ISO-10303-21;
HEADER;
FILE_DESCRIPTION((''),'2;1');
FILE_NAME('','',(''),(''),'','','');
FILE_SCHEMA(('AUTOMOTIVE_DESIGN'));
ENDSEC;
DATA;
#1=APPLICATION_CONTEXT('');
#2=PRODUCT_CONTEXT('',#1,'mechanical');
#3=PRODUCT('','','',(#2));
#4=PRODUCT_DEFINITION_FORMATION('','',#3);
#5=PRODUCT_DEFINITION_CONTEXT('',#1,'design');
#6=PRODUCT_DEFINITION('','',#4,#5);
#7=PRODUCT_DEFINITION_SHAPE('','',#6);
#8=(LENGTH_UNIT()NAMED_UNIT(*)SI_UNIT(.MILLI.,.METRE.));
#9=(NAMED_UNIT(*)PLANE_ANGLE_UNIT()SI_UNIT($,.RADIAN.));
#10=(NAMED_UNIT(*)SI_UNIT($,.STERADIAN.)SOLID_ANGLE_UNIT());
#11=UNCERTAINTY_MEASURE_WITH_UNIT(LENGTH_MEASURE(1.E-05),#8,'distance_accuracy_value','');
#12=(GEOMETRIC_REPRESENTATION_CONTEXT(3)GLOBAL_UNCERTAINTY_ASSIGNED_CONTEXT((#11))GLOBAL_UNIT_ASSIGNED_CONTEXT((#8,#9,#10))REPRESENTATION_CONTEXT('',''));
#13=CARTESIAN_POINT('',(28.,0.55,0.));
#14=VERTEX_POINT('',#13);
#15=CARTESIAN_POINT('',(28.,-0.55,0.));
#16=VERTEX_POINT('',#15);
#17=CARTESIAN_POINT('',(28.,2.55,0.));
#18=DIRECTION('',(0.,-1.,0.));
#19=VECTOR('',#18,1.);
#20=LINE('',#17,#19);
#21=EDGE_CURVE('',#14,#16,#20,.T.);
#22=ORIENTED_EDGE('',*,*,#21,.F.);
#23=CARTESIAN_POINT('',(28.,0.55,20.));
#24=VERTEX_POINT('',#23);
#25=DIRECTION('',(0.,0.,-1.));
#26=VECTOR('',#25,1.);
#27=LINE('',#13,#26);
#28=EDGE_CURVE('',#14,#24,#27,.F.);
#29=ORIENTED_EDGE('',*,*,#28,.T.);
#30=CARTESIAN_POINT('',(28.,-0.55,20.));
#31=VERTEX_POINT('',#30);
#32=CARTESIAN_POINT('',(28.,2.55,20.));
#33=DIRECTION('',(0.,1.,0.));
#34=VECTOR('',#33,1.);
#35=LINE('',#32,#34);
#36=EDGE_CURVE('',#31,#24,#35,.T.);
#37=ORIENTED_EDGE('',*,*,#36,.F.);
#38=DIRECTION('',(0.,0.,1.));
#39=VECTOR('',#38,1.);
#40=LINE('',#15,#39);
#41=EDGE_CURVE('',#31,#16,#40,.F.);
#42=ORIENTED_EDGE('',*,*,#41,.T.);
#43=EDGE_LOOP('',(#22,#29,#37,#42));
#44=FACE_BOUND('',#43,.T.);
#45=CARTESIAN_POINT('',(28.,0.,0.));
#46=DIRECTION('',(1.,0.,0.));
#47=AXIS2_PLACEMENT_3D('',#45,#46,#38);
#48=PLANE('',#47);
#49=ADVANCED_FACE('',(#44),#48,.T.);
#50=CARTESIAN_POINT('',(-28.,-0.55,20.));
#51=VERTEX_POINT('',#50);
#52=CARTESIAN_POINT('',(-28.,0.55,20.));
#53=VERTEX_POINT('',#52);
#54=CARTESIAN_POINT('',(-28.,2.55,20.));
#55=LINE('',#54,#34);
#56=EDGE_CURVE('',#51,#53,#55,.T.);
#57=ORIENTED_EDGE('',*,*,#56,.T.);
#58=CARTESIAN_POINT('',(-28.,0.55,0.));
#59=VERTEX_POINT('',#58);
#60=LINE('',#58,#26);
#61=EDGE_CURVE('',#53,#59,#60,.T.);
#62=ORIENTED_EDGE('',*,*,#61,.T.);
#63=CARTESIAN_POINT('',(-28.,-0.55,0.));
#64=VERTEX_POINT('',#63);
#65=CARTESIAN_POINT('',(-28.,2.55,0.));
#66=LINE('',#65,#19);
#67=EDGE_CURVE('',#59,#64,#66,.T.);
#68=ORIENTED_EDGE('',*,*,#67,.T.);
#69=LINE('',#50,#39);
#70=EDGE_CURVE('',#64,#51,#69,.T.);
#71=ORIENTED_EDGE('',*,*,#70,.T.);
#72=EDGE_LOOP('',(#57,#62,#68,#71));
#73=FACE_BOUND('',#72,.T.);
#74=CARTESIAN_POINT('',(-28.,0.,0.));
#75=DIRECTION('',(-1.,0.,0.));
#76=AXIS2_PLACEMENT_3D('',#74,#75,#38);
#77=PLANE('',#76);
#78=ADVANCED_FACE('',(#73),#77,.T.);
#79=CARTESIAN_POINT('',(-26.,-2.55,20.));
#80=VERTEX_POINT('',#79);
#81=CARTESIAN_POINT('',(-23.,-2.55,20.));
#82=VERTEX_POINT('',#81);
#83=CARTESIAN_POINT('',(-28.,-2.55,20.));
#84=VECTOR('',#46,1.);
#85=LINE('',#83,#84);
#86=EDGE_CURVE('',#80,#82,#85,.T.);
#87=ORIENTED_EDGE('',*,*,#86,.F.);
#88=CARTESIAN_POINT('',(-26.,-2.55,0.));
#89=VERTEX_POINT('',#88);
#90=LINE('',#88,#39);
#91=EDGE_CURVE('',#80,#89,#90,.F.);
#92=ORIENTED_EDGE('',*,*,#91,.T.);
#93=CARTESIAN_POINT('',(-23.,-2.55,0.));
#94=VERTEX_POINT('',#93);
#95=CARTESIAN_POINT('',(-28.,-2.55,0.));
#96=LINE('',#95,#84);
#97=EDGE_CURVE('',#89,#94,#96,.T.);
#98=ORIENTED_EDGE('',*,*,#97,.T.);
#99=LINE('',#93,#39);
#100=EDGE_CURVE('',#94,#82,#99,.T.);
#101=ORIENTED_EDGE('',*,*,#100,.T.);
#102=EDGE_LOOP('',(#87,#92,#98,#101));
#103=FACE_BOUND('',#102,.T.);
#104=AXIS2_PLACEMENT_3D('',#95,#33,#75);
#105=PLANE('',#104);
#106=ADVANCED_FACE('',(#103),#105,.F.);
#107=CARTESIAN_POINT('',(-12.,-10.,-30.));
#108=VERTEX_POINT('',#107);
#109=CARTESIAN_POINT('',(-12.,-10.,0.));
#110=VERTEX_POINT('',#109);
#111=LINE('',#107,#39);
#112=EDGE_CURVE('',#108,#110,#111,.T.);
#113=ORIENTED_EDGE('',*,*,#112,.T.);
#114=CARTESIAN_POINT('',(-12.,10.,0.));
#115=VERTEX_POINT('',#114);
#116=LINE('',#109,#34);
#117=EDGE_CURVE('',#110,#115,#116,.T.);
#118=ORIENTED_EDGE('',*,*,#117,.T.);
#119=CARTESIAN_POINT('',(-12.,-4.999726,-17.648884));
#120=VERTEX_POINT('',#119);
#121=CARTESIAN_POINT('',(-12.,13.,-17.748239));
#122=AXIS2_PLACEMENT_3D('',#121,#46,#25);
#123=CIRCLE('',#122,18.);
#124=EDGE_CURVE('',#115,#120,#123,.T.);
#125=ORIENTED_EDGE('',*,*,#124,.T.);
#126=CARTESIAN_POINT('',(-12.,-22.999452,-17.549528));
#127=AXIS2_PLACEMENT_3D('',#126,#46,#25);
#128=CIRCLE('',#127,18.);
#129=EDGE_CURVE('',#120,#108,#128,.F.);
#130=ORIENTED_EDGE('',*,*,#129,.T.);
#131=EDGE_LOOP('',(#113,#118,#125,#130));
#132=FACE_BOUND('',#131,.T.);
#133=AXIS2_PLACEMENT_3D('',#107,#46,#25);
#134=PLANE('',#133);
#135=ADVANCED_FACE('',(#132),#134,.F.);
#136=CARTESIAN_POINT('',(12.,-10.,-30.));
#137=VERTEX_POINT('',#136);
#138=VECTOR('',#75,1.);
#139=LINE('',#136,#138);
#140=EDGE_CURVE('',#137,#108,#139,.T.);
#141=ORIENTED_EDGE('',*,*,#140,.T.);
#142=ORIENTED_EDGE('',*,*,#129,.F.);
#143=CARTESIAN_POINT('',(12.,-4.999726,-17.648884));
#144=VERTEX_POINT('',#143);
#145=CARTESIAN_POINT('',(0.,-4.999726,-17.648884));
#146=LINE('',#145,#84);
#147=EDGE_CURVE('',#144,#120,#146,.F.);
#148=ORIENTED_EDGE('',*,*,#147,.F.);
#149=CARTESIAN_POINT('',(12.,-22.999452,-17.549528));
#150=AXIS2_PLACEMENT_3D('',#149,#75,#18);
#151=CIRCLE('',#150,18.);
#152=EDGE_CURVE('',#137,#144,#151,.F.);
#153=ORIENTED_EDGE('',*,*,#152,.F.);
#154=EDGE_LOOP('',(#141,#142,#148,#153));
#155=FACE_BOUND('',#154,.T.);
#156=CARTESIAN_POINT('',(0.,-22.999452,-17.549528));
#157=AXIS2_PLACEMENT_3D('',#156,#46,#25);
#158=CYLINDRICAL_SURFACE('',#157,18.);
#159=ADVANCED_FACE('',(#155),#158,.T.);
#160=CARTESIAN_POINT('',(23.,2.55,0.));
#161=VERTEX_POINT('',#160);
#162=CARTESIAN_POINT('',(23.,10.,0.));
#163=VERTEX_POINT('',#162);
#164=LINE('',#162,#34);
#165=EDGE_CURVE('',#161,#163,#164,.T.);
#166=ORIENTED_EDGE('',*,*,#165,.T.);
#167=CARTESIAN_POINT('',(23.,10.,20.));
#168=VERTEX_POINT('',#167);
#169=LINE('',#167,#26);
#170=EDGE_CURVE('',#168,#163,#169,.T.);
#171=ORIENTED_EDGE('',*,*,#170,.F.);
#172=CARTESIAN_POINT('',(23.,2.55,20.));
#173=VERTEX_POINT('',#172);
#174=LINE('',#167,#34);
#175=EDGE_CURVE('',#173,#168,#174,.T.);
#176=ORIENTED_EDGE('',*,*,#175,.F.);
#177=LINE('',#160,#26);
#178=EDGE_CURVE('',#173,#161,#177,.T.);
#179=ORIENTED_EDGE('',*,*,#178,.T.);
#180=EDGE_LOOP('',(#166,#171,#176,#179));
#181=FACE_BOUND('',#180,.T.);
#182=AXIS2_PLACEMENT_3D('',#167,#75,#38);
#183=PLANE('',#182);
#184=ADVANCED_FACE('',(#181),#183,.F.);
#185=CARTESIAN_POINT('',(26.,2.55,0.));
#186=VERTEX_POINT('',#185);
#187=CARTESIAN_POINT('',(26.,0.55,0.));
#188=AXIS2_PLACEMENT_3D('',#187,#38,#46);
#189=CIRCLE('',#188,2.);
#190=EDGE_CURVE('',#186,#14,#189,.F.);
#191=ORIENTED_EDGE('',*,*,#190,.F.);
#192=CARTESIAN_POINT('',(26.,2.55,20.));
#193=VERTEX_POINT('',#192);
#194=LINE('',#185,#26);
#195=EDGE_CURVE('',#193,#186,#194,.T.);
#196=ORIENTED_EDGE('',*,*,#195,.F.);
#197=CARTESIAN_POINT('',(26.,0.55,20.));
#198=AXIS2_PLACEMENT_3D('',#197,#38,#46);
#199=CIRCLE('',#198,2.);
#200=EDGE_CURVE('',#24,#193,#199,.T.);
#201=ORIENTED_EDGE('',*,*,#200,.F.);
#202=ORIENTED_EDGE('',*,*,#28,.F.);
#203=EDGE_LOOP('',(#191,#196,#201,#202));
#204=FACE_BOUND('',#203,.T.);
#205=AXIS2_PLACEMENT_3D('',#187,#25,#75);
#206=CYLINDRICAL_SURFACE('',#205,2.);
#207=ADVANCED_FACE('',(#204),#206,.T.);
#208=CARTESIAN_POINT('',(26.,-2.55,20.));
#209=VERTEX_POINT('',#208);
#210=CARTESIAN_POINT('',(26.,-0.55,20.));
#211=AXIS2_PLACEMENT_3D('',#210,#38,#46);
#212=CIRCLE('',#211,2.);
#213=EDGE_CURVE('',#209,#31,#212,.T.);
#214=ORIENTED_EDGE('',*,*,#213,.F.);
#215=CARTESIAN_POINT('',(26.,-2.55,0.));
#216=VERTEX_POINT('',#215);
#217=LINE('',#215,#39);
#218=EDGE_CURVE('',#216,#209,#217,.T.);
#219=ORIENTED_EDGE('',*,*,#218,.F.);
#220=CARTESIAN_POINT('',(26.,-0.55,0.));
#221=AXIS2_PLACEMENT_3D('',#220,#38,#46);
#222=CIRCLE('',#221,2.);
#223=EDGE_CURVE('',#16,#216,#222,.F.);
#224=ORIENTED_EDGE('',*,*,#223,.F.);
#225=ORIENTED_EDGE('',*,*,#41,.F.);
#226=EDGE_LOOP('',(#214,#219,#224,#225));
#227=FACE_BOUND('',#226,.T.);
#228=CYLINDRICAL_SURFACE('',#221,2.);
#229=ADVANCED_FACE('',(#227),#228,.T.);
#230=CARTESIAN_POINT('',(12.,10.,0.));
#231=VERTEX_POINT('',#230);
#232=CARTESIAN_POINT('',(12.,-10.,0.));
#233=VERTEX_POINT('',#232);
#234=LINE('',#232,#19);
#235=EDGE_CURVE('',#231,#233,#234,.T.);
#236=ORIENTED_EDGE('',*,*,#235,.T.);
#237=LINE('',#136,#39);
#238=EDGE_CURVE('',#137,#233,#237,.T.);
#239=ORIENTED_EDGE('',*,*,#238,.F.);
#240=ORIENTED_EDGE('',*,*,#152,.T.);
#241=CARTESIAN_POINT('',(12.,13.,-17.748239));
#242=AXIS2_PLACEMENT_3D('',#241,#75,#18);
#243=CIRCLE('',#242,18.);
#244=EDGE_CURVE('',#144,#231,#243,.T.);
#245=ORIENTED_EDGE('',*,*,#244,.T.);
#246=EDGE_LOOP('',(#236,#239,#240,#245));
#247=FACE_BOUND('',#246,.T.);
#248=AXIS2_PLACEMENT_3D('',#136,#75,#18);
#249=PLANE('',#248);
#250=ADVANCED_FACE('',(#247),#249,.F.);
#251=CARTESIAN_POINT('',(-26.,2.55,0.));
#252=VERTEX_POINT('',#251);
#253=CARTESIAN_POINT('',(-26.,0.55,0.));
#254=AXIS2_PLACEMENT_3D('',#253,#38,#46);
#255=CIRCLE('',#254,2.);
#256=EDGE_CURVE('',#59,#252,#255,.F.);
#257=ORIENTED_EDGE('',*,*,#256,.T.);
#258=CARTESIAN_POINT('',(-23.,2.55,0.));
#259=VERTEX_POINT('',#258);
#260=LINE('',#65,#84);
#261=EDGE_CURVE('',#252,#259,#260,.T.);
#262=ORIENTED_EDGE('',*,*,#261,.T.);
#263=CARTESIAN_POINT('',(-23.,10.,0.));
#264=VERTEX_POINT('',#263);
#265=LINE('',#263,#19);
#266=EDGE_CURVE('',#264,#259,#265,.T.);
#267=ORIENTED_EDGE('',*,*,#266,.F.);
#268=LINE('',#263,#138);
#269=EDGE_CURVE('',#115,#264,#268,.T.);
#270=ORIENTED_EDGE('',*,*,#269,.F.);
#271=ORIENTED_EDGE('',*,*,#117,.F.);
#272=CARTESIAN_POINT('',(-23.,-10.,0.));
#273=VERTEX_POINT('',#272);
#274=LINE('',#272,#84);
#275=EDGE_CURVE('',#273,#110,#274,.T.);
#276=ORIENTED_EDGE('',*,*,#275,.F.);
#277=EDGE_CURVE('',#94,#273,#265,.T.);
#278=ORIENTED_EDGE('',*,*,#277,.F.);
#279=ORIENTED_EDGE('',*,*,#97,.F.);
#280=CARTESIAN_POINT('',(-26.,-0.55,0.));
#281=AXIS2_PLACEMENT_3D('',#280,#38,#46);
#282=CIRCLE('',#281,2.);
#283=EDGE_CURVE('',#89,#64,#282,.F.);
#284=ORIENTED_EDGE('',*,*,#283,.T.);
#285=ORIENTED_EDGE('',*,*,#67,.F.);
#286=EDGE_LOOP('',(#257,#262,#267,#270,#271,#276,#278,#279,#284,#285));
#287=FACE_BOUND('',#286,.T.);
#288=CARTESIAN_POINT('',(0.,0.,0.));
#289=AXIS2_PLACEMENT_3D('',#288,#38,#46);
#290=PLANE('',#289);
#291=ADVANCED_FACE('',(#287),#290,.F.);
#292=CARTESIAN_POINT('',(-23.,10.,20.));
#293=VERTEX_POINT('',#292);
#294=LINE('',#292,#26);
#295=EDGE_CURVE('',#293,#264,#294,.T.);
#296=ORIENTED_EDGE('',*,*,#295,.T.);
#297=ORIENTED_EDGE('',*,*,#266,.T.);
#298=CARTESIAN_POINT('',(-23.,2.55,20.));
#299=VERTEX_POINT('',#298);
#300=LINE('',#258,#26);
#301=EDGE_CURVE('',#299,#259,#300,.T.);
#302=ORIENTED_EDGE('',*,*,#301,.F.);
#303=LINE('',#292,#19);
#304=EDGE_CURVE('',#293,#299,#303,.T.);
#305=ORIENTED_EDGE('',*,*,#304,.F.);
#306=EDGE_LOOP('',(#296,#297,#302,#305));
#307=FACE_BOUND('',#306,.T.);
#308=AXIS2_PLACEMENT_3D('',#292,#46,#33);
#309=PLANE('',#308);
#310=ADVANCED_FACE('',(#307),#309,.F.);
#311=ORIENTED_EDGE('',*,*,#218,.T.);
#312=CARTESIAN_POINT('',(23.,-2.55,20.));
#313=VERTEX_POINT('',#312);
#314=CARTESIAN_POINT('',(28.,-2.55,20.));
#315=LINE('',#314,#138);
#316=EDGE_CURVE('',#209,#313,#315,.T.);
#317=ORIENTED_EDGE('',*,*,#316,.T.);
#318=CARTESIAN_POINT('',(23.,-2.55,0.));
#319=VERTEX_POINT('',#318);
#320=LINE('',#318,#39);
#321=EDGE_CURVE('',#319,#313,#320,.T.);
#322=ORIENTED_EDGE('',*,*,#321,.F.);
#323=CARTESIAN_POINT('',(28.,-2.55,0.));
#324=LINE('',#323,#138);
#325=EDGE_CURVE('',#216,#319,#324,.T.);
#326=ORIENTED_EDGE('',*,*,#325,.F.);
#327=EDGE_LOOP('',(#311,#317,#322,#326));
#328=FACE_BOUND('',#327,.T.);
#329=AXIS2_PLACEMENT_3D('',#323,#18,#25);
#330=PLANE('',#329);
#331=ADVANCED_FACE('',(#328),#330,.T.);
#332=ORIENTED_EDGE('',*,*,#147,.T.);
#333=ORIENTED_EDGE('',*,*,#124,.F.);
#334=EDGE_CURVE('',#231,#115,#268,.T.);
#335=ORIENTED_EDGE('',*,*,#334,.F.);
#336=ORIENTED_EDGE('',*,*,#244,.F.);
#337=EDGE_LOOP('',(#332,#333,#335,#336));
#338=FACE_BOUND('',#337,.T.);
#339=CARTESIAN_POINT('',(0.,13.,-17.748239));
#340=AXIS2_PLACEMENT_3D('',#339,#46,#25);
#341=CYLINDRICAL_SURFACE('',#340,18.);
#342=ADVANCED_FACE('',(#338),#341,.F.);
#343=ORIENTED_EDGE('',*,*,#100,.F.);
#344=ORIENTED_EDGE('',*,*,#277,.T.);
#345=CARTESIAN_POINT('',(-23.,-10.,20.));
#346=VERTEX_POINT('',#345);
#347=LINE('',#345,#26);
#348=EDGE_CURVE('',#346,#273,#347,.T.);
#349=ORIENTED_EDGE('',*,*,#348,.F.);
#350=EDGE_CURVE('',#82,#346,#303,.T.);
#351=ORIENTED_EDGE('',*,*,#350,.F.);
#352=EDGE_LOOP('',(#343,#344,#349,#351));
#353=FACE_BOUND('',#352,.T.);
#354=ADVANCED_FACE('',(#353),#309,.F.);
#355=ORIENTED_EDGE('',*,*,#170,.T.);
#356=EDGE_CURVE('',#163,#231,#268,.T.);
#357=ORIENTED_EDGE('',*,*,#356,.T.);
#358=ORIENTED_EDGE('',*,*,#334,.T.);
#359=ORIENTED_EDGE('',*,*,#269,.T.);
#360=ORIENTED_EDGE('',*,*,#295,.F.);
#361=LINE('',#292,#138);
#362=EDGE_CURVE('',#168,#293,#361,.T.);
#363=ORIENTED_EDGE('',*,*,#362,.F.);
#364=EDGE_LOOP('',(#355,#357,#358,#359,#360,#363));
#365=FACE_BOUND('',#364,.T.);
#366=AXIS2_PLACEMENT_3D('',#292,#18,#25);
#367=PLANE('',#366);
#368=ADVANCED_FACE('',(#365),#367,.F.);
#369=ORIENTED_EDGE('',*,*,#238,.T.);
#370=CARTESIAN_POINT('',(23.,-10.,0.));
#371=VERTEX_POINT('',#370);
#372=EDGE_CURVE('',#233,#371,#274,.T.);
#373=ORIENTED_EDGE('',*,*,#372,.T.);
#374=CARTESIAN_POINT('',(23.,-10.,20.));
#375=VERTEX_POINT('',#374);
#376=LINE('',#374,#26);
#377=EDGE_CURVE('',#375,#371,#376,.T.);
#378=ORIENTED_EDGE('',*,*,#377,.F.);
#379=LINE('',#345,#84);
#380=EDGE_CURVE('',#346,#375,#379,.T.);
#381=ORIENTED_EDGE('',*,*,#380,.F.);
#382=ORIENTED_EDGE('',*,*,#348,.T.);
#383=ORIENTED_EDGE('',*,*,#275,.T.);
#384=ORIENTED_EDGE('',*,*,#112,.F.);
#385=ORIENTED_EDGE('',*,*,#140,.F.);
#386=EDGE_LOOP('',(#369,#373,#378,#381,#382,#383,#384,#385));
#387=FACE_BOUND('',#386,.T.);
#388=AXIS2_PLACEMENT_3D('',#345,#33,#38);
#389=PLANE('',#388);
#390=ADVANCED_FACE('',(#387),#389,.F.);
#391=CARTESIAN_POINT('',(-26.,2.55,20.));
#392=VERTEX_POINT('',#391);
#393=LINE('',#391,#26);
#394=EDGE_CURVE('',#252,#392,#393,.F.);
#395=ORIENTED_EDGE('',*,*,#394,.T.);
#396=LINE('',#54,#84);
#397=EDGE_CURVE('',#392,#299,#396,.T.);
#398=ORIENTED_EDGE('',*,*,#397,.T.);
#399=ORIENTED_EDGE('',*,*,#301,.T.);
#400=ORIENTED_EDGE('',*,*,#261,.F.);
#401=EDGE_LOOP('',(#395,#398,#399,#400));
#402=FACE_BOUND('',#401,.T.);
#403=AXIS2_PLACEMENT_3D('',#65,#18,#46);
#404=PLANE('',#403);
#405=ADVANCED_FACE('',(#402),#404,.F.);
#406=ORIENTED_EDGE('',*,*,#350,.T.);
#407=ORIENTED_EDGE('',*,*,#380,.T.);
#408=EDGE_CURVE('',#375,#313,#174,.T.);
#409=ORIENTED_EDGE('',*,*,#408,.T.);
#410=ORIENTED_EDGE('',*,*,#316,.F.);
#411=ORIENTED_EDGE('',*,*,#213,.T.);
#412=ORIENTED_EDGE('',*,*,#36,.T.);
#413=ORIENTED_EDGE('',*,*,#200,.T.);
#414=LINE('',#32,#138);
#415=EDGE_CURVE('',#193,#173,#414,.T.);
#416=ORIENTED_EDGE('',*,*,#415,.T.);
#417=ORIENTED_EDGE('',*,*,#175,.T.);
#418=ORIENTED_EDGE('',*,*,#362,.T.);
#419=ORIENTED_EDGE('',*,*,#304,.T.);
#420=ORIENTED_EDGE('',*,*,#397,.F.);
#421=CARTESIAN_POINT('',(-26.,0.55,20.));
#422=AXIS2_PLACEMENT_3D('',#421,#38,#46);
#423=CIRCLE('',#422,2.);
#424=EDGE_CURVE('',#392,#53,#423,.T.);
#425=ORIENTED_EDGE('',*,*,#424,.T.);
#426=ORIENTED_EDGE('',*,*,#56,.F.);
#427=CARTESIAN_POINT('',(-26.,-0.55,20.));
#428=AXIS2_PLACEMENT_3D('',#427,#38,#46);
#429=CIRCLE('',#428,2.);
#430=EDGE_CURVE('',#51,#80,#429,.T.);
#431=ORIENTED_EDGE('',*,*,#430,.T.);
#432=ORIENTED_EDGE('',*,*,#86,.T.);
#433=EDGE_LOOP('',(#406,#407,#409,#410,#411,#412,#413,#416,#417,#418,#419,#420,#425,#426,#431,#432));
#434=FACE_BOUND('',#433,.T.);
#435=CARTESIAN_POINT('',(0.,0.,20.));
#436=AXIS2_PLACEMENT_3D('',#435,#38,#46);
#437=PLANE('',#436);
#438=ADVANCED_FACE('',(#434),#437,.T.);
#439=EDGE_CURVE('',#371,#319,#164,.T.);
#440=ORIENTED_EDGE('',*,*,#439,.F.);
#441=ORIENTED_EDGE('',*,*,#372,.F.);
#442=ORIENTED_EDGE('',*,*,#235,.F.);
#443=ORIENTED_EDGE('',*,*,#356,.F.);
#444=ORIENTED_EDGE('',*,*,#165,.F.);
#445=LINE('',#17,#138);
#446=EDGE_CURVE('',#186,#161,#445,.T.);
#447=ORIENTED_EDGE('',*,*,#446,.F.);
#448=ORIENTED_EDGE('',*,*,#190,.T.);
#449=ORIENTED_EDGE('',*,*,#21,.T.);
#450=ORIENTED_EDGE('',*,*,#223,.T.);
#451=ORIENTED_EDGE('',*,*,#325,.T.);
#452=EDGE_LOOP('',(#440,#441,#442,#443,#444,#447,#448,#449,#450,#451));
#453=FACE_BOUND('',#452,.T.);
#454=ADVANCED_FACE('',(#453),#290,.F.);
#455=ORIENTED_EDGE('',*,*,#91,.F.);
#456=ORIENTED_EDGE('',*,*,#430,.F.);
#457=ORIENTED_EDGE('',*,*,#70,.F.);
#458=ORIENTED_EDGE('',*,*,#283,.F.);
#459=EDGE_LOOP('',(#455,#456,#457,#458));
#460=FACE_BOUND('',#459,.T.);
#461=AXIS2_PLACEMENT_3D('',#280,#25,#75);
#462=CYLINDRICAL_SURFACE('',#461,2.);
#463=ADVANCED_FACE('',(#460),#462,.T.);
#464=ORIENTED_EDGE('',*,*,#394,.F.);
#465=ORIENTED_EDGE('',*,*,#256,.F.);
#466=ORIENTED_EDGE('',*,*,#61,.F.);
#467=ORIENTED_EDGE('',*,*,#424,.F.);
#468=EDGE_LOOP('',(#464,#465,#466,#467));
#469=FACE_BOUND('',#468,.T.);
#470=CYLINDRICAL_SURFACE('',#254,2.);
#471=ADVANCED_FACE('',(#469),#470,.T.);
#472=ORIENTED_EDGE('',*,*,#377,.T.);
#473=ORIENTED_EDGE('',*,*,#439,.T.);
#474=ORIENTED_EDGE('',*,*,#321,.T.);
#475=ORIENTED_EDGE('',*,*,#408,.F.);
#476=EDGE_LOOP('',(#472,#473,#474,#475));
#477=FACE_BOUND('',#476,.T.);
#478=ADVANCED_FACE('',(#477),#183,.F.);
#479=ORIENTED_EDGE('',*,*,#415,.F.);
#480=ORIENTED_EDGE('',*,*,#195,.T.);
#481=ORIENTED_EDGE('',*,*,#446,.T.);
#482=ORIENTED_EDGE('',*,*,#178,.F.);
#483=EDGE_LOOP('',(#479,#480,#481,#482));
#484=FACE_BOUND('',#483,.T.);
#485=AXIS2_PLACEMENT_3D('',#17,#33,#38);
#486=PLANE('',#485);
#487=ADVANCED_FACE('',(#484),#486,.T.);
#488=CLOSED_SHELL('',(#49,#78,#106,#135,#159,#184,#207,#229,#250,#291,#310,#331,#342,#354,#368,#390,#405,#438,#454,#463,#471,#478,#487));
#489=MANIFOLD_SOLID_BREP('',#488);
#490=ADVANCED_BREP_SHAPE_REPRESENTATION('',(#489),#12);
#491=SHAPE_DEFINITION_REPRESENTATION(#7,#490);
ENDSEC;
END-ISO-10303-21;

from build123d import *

# Parameters (mm, degrees)
SKETCH_1_W             = 46
SKETCH_1_H             = 20
EXTRUDE_1_DEPTH        = 20
SKETCH_2_W             = 20
SKETCH_2_H             = 5.1
EXTRUDE_2_DEPTH        = 5
FILLET_1_R             = 2
FILLET_1_OF_MIRROR_1_R = 2
SKETCH_3_W             = 24
SKETCH_3_H             = 5
EXTRUDE_3_DEPTH        = 30
FILLET_2_R             = 18
FILLET_3_R             = 18


with BuildPart() as part:
    # 스케치1 → 보스-돌출1 (new body)
    with BuildSketch(Plane.XY):
        Rectangle(SKETCH_1_W, SKETCH_1_H)
    extrude(amount=EXTRUDE_1_DEPTH)

    # 스케치2 → 보스-돌출2 (add)
    with BuildSketch(Plane.ZY.offset(23)):
        with Locations((10, 0)):
            Rectangle(SKETCH_2_W, SKETCH_2_H)
    extrude_2 = extrude(amount=EXTRUDE_2_DEPTH)

    # 필렛1
    fillet_1_edges = [part.edges().sort_by_distance(p)[0] for p in [
        (-28, 2.55, 10),
        (-28, -2.55, 10),
    ]]
    fillet(fillet_1_edges, radius=FILLET_1_R)

    # 대칭 복사1: 보스-돌출2 across plane
    add(extrude_2.mirror(Plane(origin=(0, 0, 0), x_dir=(0, 0, 1), z_dir=(1, 0, 0))))

    # 필렛1 of 대칭 복사1
    fillet_1_of_mirror_1_edges = [part.edges().sort_by_distance(p)[0] for p in [
        (28, 2.55, 10),
        (28, -2.55, 10),
    ]]
    fillet(fillet_1_of_mirror_1_edges, radius=FILLET_1_OF_MIRROR_1_R)

    # 스케치3 → 보스-돌출3 (add)
    with BuildSketch(Plane(origin=(0, 0, 0), x_dir=(-1, 0, 0), z_dir=(0, 0, -1))):
        with Locations((0, -7.5)):
            Rectangle(SKETCH_3_W, SKETCH_3_H)
    extrude(amount=EXTRUDE_3_DEPTH)

    # 필렛2
    # the kernel refuses this fillet: 18 mm, written as the material it adds along each edge
    with BuildSketch(Plane(origin=(-12, -5, 0), x_dir=(0, 1, 0), z_dir=(1, 0, 0))) as fillet_2_piece_1:
        with BuildLine():
            CenterArc((18, -17.748239349), FILLET_2_R, 99.594068227, 80.405931773)
            Line((0, -17.748239349), (0, 0))
            Line((0, 0), (15, 0))
        make_face()
    extrude(amount=24)

    # 필렛3
    # the kernel refuses this fillet: 18 mm, written as the material it takes off along each edge
    with BuildSketch(Plane(origin=(-42.877791108, -5, -30), x_dir=(0, -1, 0), z_dir=(1, 0, 0))) as fillet_3_piece_1:
        with BuildLine():
            CenterArc((17.999451575, -12.45047223), FILLET_3_R, 136.235733455, 43.448005638)
            Line((-0.000274212, -12.35111644), (-1.800246791, -12.341180861))
            ThreePointArc((-1.800246791, -12.341180861), (-1.8, -12.251760651), (-1.8, 0))
            Line((-1.8, 0), (0, 1.8))
            ThreePointArc((0, 1.8), (2.5, 1.8), (3.700054842, 1.245047223))
            Line((3.700054842, 1.245047223), (5, 0))
        make_face()
    extrude(amount=85.755582217, mode=Mode.SUBTRACT)


solid = part.part
